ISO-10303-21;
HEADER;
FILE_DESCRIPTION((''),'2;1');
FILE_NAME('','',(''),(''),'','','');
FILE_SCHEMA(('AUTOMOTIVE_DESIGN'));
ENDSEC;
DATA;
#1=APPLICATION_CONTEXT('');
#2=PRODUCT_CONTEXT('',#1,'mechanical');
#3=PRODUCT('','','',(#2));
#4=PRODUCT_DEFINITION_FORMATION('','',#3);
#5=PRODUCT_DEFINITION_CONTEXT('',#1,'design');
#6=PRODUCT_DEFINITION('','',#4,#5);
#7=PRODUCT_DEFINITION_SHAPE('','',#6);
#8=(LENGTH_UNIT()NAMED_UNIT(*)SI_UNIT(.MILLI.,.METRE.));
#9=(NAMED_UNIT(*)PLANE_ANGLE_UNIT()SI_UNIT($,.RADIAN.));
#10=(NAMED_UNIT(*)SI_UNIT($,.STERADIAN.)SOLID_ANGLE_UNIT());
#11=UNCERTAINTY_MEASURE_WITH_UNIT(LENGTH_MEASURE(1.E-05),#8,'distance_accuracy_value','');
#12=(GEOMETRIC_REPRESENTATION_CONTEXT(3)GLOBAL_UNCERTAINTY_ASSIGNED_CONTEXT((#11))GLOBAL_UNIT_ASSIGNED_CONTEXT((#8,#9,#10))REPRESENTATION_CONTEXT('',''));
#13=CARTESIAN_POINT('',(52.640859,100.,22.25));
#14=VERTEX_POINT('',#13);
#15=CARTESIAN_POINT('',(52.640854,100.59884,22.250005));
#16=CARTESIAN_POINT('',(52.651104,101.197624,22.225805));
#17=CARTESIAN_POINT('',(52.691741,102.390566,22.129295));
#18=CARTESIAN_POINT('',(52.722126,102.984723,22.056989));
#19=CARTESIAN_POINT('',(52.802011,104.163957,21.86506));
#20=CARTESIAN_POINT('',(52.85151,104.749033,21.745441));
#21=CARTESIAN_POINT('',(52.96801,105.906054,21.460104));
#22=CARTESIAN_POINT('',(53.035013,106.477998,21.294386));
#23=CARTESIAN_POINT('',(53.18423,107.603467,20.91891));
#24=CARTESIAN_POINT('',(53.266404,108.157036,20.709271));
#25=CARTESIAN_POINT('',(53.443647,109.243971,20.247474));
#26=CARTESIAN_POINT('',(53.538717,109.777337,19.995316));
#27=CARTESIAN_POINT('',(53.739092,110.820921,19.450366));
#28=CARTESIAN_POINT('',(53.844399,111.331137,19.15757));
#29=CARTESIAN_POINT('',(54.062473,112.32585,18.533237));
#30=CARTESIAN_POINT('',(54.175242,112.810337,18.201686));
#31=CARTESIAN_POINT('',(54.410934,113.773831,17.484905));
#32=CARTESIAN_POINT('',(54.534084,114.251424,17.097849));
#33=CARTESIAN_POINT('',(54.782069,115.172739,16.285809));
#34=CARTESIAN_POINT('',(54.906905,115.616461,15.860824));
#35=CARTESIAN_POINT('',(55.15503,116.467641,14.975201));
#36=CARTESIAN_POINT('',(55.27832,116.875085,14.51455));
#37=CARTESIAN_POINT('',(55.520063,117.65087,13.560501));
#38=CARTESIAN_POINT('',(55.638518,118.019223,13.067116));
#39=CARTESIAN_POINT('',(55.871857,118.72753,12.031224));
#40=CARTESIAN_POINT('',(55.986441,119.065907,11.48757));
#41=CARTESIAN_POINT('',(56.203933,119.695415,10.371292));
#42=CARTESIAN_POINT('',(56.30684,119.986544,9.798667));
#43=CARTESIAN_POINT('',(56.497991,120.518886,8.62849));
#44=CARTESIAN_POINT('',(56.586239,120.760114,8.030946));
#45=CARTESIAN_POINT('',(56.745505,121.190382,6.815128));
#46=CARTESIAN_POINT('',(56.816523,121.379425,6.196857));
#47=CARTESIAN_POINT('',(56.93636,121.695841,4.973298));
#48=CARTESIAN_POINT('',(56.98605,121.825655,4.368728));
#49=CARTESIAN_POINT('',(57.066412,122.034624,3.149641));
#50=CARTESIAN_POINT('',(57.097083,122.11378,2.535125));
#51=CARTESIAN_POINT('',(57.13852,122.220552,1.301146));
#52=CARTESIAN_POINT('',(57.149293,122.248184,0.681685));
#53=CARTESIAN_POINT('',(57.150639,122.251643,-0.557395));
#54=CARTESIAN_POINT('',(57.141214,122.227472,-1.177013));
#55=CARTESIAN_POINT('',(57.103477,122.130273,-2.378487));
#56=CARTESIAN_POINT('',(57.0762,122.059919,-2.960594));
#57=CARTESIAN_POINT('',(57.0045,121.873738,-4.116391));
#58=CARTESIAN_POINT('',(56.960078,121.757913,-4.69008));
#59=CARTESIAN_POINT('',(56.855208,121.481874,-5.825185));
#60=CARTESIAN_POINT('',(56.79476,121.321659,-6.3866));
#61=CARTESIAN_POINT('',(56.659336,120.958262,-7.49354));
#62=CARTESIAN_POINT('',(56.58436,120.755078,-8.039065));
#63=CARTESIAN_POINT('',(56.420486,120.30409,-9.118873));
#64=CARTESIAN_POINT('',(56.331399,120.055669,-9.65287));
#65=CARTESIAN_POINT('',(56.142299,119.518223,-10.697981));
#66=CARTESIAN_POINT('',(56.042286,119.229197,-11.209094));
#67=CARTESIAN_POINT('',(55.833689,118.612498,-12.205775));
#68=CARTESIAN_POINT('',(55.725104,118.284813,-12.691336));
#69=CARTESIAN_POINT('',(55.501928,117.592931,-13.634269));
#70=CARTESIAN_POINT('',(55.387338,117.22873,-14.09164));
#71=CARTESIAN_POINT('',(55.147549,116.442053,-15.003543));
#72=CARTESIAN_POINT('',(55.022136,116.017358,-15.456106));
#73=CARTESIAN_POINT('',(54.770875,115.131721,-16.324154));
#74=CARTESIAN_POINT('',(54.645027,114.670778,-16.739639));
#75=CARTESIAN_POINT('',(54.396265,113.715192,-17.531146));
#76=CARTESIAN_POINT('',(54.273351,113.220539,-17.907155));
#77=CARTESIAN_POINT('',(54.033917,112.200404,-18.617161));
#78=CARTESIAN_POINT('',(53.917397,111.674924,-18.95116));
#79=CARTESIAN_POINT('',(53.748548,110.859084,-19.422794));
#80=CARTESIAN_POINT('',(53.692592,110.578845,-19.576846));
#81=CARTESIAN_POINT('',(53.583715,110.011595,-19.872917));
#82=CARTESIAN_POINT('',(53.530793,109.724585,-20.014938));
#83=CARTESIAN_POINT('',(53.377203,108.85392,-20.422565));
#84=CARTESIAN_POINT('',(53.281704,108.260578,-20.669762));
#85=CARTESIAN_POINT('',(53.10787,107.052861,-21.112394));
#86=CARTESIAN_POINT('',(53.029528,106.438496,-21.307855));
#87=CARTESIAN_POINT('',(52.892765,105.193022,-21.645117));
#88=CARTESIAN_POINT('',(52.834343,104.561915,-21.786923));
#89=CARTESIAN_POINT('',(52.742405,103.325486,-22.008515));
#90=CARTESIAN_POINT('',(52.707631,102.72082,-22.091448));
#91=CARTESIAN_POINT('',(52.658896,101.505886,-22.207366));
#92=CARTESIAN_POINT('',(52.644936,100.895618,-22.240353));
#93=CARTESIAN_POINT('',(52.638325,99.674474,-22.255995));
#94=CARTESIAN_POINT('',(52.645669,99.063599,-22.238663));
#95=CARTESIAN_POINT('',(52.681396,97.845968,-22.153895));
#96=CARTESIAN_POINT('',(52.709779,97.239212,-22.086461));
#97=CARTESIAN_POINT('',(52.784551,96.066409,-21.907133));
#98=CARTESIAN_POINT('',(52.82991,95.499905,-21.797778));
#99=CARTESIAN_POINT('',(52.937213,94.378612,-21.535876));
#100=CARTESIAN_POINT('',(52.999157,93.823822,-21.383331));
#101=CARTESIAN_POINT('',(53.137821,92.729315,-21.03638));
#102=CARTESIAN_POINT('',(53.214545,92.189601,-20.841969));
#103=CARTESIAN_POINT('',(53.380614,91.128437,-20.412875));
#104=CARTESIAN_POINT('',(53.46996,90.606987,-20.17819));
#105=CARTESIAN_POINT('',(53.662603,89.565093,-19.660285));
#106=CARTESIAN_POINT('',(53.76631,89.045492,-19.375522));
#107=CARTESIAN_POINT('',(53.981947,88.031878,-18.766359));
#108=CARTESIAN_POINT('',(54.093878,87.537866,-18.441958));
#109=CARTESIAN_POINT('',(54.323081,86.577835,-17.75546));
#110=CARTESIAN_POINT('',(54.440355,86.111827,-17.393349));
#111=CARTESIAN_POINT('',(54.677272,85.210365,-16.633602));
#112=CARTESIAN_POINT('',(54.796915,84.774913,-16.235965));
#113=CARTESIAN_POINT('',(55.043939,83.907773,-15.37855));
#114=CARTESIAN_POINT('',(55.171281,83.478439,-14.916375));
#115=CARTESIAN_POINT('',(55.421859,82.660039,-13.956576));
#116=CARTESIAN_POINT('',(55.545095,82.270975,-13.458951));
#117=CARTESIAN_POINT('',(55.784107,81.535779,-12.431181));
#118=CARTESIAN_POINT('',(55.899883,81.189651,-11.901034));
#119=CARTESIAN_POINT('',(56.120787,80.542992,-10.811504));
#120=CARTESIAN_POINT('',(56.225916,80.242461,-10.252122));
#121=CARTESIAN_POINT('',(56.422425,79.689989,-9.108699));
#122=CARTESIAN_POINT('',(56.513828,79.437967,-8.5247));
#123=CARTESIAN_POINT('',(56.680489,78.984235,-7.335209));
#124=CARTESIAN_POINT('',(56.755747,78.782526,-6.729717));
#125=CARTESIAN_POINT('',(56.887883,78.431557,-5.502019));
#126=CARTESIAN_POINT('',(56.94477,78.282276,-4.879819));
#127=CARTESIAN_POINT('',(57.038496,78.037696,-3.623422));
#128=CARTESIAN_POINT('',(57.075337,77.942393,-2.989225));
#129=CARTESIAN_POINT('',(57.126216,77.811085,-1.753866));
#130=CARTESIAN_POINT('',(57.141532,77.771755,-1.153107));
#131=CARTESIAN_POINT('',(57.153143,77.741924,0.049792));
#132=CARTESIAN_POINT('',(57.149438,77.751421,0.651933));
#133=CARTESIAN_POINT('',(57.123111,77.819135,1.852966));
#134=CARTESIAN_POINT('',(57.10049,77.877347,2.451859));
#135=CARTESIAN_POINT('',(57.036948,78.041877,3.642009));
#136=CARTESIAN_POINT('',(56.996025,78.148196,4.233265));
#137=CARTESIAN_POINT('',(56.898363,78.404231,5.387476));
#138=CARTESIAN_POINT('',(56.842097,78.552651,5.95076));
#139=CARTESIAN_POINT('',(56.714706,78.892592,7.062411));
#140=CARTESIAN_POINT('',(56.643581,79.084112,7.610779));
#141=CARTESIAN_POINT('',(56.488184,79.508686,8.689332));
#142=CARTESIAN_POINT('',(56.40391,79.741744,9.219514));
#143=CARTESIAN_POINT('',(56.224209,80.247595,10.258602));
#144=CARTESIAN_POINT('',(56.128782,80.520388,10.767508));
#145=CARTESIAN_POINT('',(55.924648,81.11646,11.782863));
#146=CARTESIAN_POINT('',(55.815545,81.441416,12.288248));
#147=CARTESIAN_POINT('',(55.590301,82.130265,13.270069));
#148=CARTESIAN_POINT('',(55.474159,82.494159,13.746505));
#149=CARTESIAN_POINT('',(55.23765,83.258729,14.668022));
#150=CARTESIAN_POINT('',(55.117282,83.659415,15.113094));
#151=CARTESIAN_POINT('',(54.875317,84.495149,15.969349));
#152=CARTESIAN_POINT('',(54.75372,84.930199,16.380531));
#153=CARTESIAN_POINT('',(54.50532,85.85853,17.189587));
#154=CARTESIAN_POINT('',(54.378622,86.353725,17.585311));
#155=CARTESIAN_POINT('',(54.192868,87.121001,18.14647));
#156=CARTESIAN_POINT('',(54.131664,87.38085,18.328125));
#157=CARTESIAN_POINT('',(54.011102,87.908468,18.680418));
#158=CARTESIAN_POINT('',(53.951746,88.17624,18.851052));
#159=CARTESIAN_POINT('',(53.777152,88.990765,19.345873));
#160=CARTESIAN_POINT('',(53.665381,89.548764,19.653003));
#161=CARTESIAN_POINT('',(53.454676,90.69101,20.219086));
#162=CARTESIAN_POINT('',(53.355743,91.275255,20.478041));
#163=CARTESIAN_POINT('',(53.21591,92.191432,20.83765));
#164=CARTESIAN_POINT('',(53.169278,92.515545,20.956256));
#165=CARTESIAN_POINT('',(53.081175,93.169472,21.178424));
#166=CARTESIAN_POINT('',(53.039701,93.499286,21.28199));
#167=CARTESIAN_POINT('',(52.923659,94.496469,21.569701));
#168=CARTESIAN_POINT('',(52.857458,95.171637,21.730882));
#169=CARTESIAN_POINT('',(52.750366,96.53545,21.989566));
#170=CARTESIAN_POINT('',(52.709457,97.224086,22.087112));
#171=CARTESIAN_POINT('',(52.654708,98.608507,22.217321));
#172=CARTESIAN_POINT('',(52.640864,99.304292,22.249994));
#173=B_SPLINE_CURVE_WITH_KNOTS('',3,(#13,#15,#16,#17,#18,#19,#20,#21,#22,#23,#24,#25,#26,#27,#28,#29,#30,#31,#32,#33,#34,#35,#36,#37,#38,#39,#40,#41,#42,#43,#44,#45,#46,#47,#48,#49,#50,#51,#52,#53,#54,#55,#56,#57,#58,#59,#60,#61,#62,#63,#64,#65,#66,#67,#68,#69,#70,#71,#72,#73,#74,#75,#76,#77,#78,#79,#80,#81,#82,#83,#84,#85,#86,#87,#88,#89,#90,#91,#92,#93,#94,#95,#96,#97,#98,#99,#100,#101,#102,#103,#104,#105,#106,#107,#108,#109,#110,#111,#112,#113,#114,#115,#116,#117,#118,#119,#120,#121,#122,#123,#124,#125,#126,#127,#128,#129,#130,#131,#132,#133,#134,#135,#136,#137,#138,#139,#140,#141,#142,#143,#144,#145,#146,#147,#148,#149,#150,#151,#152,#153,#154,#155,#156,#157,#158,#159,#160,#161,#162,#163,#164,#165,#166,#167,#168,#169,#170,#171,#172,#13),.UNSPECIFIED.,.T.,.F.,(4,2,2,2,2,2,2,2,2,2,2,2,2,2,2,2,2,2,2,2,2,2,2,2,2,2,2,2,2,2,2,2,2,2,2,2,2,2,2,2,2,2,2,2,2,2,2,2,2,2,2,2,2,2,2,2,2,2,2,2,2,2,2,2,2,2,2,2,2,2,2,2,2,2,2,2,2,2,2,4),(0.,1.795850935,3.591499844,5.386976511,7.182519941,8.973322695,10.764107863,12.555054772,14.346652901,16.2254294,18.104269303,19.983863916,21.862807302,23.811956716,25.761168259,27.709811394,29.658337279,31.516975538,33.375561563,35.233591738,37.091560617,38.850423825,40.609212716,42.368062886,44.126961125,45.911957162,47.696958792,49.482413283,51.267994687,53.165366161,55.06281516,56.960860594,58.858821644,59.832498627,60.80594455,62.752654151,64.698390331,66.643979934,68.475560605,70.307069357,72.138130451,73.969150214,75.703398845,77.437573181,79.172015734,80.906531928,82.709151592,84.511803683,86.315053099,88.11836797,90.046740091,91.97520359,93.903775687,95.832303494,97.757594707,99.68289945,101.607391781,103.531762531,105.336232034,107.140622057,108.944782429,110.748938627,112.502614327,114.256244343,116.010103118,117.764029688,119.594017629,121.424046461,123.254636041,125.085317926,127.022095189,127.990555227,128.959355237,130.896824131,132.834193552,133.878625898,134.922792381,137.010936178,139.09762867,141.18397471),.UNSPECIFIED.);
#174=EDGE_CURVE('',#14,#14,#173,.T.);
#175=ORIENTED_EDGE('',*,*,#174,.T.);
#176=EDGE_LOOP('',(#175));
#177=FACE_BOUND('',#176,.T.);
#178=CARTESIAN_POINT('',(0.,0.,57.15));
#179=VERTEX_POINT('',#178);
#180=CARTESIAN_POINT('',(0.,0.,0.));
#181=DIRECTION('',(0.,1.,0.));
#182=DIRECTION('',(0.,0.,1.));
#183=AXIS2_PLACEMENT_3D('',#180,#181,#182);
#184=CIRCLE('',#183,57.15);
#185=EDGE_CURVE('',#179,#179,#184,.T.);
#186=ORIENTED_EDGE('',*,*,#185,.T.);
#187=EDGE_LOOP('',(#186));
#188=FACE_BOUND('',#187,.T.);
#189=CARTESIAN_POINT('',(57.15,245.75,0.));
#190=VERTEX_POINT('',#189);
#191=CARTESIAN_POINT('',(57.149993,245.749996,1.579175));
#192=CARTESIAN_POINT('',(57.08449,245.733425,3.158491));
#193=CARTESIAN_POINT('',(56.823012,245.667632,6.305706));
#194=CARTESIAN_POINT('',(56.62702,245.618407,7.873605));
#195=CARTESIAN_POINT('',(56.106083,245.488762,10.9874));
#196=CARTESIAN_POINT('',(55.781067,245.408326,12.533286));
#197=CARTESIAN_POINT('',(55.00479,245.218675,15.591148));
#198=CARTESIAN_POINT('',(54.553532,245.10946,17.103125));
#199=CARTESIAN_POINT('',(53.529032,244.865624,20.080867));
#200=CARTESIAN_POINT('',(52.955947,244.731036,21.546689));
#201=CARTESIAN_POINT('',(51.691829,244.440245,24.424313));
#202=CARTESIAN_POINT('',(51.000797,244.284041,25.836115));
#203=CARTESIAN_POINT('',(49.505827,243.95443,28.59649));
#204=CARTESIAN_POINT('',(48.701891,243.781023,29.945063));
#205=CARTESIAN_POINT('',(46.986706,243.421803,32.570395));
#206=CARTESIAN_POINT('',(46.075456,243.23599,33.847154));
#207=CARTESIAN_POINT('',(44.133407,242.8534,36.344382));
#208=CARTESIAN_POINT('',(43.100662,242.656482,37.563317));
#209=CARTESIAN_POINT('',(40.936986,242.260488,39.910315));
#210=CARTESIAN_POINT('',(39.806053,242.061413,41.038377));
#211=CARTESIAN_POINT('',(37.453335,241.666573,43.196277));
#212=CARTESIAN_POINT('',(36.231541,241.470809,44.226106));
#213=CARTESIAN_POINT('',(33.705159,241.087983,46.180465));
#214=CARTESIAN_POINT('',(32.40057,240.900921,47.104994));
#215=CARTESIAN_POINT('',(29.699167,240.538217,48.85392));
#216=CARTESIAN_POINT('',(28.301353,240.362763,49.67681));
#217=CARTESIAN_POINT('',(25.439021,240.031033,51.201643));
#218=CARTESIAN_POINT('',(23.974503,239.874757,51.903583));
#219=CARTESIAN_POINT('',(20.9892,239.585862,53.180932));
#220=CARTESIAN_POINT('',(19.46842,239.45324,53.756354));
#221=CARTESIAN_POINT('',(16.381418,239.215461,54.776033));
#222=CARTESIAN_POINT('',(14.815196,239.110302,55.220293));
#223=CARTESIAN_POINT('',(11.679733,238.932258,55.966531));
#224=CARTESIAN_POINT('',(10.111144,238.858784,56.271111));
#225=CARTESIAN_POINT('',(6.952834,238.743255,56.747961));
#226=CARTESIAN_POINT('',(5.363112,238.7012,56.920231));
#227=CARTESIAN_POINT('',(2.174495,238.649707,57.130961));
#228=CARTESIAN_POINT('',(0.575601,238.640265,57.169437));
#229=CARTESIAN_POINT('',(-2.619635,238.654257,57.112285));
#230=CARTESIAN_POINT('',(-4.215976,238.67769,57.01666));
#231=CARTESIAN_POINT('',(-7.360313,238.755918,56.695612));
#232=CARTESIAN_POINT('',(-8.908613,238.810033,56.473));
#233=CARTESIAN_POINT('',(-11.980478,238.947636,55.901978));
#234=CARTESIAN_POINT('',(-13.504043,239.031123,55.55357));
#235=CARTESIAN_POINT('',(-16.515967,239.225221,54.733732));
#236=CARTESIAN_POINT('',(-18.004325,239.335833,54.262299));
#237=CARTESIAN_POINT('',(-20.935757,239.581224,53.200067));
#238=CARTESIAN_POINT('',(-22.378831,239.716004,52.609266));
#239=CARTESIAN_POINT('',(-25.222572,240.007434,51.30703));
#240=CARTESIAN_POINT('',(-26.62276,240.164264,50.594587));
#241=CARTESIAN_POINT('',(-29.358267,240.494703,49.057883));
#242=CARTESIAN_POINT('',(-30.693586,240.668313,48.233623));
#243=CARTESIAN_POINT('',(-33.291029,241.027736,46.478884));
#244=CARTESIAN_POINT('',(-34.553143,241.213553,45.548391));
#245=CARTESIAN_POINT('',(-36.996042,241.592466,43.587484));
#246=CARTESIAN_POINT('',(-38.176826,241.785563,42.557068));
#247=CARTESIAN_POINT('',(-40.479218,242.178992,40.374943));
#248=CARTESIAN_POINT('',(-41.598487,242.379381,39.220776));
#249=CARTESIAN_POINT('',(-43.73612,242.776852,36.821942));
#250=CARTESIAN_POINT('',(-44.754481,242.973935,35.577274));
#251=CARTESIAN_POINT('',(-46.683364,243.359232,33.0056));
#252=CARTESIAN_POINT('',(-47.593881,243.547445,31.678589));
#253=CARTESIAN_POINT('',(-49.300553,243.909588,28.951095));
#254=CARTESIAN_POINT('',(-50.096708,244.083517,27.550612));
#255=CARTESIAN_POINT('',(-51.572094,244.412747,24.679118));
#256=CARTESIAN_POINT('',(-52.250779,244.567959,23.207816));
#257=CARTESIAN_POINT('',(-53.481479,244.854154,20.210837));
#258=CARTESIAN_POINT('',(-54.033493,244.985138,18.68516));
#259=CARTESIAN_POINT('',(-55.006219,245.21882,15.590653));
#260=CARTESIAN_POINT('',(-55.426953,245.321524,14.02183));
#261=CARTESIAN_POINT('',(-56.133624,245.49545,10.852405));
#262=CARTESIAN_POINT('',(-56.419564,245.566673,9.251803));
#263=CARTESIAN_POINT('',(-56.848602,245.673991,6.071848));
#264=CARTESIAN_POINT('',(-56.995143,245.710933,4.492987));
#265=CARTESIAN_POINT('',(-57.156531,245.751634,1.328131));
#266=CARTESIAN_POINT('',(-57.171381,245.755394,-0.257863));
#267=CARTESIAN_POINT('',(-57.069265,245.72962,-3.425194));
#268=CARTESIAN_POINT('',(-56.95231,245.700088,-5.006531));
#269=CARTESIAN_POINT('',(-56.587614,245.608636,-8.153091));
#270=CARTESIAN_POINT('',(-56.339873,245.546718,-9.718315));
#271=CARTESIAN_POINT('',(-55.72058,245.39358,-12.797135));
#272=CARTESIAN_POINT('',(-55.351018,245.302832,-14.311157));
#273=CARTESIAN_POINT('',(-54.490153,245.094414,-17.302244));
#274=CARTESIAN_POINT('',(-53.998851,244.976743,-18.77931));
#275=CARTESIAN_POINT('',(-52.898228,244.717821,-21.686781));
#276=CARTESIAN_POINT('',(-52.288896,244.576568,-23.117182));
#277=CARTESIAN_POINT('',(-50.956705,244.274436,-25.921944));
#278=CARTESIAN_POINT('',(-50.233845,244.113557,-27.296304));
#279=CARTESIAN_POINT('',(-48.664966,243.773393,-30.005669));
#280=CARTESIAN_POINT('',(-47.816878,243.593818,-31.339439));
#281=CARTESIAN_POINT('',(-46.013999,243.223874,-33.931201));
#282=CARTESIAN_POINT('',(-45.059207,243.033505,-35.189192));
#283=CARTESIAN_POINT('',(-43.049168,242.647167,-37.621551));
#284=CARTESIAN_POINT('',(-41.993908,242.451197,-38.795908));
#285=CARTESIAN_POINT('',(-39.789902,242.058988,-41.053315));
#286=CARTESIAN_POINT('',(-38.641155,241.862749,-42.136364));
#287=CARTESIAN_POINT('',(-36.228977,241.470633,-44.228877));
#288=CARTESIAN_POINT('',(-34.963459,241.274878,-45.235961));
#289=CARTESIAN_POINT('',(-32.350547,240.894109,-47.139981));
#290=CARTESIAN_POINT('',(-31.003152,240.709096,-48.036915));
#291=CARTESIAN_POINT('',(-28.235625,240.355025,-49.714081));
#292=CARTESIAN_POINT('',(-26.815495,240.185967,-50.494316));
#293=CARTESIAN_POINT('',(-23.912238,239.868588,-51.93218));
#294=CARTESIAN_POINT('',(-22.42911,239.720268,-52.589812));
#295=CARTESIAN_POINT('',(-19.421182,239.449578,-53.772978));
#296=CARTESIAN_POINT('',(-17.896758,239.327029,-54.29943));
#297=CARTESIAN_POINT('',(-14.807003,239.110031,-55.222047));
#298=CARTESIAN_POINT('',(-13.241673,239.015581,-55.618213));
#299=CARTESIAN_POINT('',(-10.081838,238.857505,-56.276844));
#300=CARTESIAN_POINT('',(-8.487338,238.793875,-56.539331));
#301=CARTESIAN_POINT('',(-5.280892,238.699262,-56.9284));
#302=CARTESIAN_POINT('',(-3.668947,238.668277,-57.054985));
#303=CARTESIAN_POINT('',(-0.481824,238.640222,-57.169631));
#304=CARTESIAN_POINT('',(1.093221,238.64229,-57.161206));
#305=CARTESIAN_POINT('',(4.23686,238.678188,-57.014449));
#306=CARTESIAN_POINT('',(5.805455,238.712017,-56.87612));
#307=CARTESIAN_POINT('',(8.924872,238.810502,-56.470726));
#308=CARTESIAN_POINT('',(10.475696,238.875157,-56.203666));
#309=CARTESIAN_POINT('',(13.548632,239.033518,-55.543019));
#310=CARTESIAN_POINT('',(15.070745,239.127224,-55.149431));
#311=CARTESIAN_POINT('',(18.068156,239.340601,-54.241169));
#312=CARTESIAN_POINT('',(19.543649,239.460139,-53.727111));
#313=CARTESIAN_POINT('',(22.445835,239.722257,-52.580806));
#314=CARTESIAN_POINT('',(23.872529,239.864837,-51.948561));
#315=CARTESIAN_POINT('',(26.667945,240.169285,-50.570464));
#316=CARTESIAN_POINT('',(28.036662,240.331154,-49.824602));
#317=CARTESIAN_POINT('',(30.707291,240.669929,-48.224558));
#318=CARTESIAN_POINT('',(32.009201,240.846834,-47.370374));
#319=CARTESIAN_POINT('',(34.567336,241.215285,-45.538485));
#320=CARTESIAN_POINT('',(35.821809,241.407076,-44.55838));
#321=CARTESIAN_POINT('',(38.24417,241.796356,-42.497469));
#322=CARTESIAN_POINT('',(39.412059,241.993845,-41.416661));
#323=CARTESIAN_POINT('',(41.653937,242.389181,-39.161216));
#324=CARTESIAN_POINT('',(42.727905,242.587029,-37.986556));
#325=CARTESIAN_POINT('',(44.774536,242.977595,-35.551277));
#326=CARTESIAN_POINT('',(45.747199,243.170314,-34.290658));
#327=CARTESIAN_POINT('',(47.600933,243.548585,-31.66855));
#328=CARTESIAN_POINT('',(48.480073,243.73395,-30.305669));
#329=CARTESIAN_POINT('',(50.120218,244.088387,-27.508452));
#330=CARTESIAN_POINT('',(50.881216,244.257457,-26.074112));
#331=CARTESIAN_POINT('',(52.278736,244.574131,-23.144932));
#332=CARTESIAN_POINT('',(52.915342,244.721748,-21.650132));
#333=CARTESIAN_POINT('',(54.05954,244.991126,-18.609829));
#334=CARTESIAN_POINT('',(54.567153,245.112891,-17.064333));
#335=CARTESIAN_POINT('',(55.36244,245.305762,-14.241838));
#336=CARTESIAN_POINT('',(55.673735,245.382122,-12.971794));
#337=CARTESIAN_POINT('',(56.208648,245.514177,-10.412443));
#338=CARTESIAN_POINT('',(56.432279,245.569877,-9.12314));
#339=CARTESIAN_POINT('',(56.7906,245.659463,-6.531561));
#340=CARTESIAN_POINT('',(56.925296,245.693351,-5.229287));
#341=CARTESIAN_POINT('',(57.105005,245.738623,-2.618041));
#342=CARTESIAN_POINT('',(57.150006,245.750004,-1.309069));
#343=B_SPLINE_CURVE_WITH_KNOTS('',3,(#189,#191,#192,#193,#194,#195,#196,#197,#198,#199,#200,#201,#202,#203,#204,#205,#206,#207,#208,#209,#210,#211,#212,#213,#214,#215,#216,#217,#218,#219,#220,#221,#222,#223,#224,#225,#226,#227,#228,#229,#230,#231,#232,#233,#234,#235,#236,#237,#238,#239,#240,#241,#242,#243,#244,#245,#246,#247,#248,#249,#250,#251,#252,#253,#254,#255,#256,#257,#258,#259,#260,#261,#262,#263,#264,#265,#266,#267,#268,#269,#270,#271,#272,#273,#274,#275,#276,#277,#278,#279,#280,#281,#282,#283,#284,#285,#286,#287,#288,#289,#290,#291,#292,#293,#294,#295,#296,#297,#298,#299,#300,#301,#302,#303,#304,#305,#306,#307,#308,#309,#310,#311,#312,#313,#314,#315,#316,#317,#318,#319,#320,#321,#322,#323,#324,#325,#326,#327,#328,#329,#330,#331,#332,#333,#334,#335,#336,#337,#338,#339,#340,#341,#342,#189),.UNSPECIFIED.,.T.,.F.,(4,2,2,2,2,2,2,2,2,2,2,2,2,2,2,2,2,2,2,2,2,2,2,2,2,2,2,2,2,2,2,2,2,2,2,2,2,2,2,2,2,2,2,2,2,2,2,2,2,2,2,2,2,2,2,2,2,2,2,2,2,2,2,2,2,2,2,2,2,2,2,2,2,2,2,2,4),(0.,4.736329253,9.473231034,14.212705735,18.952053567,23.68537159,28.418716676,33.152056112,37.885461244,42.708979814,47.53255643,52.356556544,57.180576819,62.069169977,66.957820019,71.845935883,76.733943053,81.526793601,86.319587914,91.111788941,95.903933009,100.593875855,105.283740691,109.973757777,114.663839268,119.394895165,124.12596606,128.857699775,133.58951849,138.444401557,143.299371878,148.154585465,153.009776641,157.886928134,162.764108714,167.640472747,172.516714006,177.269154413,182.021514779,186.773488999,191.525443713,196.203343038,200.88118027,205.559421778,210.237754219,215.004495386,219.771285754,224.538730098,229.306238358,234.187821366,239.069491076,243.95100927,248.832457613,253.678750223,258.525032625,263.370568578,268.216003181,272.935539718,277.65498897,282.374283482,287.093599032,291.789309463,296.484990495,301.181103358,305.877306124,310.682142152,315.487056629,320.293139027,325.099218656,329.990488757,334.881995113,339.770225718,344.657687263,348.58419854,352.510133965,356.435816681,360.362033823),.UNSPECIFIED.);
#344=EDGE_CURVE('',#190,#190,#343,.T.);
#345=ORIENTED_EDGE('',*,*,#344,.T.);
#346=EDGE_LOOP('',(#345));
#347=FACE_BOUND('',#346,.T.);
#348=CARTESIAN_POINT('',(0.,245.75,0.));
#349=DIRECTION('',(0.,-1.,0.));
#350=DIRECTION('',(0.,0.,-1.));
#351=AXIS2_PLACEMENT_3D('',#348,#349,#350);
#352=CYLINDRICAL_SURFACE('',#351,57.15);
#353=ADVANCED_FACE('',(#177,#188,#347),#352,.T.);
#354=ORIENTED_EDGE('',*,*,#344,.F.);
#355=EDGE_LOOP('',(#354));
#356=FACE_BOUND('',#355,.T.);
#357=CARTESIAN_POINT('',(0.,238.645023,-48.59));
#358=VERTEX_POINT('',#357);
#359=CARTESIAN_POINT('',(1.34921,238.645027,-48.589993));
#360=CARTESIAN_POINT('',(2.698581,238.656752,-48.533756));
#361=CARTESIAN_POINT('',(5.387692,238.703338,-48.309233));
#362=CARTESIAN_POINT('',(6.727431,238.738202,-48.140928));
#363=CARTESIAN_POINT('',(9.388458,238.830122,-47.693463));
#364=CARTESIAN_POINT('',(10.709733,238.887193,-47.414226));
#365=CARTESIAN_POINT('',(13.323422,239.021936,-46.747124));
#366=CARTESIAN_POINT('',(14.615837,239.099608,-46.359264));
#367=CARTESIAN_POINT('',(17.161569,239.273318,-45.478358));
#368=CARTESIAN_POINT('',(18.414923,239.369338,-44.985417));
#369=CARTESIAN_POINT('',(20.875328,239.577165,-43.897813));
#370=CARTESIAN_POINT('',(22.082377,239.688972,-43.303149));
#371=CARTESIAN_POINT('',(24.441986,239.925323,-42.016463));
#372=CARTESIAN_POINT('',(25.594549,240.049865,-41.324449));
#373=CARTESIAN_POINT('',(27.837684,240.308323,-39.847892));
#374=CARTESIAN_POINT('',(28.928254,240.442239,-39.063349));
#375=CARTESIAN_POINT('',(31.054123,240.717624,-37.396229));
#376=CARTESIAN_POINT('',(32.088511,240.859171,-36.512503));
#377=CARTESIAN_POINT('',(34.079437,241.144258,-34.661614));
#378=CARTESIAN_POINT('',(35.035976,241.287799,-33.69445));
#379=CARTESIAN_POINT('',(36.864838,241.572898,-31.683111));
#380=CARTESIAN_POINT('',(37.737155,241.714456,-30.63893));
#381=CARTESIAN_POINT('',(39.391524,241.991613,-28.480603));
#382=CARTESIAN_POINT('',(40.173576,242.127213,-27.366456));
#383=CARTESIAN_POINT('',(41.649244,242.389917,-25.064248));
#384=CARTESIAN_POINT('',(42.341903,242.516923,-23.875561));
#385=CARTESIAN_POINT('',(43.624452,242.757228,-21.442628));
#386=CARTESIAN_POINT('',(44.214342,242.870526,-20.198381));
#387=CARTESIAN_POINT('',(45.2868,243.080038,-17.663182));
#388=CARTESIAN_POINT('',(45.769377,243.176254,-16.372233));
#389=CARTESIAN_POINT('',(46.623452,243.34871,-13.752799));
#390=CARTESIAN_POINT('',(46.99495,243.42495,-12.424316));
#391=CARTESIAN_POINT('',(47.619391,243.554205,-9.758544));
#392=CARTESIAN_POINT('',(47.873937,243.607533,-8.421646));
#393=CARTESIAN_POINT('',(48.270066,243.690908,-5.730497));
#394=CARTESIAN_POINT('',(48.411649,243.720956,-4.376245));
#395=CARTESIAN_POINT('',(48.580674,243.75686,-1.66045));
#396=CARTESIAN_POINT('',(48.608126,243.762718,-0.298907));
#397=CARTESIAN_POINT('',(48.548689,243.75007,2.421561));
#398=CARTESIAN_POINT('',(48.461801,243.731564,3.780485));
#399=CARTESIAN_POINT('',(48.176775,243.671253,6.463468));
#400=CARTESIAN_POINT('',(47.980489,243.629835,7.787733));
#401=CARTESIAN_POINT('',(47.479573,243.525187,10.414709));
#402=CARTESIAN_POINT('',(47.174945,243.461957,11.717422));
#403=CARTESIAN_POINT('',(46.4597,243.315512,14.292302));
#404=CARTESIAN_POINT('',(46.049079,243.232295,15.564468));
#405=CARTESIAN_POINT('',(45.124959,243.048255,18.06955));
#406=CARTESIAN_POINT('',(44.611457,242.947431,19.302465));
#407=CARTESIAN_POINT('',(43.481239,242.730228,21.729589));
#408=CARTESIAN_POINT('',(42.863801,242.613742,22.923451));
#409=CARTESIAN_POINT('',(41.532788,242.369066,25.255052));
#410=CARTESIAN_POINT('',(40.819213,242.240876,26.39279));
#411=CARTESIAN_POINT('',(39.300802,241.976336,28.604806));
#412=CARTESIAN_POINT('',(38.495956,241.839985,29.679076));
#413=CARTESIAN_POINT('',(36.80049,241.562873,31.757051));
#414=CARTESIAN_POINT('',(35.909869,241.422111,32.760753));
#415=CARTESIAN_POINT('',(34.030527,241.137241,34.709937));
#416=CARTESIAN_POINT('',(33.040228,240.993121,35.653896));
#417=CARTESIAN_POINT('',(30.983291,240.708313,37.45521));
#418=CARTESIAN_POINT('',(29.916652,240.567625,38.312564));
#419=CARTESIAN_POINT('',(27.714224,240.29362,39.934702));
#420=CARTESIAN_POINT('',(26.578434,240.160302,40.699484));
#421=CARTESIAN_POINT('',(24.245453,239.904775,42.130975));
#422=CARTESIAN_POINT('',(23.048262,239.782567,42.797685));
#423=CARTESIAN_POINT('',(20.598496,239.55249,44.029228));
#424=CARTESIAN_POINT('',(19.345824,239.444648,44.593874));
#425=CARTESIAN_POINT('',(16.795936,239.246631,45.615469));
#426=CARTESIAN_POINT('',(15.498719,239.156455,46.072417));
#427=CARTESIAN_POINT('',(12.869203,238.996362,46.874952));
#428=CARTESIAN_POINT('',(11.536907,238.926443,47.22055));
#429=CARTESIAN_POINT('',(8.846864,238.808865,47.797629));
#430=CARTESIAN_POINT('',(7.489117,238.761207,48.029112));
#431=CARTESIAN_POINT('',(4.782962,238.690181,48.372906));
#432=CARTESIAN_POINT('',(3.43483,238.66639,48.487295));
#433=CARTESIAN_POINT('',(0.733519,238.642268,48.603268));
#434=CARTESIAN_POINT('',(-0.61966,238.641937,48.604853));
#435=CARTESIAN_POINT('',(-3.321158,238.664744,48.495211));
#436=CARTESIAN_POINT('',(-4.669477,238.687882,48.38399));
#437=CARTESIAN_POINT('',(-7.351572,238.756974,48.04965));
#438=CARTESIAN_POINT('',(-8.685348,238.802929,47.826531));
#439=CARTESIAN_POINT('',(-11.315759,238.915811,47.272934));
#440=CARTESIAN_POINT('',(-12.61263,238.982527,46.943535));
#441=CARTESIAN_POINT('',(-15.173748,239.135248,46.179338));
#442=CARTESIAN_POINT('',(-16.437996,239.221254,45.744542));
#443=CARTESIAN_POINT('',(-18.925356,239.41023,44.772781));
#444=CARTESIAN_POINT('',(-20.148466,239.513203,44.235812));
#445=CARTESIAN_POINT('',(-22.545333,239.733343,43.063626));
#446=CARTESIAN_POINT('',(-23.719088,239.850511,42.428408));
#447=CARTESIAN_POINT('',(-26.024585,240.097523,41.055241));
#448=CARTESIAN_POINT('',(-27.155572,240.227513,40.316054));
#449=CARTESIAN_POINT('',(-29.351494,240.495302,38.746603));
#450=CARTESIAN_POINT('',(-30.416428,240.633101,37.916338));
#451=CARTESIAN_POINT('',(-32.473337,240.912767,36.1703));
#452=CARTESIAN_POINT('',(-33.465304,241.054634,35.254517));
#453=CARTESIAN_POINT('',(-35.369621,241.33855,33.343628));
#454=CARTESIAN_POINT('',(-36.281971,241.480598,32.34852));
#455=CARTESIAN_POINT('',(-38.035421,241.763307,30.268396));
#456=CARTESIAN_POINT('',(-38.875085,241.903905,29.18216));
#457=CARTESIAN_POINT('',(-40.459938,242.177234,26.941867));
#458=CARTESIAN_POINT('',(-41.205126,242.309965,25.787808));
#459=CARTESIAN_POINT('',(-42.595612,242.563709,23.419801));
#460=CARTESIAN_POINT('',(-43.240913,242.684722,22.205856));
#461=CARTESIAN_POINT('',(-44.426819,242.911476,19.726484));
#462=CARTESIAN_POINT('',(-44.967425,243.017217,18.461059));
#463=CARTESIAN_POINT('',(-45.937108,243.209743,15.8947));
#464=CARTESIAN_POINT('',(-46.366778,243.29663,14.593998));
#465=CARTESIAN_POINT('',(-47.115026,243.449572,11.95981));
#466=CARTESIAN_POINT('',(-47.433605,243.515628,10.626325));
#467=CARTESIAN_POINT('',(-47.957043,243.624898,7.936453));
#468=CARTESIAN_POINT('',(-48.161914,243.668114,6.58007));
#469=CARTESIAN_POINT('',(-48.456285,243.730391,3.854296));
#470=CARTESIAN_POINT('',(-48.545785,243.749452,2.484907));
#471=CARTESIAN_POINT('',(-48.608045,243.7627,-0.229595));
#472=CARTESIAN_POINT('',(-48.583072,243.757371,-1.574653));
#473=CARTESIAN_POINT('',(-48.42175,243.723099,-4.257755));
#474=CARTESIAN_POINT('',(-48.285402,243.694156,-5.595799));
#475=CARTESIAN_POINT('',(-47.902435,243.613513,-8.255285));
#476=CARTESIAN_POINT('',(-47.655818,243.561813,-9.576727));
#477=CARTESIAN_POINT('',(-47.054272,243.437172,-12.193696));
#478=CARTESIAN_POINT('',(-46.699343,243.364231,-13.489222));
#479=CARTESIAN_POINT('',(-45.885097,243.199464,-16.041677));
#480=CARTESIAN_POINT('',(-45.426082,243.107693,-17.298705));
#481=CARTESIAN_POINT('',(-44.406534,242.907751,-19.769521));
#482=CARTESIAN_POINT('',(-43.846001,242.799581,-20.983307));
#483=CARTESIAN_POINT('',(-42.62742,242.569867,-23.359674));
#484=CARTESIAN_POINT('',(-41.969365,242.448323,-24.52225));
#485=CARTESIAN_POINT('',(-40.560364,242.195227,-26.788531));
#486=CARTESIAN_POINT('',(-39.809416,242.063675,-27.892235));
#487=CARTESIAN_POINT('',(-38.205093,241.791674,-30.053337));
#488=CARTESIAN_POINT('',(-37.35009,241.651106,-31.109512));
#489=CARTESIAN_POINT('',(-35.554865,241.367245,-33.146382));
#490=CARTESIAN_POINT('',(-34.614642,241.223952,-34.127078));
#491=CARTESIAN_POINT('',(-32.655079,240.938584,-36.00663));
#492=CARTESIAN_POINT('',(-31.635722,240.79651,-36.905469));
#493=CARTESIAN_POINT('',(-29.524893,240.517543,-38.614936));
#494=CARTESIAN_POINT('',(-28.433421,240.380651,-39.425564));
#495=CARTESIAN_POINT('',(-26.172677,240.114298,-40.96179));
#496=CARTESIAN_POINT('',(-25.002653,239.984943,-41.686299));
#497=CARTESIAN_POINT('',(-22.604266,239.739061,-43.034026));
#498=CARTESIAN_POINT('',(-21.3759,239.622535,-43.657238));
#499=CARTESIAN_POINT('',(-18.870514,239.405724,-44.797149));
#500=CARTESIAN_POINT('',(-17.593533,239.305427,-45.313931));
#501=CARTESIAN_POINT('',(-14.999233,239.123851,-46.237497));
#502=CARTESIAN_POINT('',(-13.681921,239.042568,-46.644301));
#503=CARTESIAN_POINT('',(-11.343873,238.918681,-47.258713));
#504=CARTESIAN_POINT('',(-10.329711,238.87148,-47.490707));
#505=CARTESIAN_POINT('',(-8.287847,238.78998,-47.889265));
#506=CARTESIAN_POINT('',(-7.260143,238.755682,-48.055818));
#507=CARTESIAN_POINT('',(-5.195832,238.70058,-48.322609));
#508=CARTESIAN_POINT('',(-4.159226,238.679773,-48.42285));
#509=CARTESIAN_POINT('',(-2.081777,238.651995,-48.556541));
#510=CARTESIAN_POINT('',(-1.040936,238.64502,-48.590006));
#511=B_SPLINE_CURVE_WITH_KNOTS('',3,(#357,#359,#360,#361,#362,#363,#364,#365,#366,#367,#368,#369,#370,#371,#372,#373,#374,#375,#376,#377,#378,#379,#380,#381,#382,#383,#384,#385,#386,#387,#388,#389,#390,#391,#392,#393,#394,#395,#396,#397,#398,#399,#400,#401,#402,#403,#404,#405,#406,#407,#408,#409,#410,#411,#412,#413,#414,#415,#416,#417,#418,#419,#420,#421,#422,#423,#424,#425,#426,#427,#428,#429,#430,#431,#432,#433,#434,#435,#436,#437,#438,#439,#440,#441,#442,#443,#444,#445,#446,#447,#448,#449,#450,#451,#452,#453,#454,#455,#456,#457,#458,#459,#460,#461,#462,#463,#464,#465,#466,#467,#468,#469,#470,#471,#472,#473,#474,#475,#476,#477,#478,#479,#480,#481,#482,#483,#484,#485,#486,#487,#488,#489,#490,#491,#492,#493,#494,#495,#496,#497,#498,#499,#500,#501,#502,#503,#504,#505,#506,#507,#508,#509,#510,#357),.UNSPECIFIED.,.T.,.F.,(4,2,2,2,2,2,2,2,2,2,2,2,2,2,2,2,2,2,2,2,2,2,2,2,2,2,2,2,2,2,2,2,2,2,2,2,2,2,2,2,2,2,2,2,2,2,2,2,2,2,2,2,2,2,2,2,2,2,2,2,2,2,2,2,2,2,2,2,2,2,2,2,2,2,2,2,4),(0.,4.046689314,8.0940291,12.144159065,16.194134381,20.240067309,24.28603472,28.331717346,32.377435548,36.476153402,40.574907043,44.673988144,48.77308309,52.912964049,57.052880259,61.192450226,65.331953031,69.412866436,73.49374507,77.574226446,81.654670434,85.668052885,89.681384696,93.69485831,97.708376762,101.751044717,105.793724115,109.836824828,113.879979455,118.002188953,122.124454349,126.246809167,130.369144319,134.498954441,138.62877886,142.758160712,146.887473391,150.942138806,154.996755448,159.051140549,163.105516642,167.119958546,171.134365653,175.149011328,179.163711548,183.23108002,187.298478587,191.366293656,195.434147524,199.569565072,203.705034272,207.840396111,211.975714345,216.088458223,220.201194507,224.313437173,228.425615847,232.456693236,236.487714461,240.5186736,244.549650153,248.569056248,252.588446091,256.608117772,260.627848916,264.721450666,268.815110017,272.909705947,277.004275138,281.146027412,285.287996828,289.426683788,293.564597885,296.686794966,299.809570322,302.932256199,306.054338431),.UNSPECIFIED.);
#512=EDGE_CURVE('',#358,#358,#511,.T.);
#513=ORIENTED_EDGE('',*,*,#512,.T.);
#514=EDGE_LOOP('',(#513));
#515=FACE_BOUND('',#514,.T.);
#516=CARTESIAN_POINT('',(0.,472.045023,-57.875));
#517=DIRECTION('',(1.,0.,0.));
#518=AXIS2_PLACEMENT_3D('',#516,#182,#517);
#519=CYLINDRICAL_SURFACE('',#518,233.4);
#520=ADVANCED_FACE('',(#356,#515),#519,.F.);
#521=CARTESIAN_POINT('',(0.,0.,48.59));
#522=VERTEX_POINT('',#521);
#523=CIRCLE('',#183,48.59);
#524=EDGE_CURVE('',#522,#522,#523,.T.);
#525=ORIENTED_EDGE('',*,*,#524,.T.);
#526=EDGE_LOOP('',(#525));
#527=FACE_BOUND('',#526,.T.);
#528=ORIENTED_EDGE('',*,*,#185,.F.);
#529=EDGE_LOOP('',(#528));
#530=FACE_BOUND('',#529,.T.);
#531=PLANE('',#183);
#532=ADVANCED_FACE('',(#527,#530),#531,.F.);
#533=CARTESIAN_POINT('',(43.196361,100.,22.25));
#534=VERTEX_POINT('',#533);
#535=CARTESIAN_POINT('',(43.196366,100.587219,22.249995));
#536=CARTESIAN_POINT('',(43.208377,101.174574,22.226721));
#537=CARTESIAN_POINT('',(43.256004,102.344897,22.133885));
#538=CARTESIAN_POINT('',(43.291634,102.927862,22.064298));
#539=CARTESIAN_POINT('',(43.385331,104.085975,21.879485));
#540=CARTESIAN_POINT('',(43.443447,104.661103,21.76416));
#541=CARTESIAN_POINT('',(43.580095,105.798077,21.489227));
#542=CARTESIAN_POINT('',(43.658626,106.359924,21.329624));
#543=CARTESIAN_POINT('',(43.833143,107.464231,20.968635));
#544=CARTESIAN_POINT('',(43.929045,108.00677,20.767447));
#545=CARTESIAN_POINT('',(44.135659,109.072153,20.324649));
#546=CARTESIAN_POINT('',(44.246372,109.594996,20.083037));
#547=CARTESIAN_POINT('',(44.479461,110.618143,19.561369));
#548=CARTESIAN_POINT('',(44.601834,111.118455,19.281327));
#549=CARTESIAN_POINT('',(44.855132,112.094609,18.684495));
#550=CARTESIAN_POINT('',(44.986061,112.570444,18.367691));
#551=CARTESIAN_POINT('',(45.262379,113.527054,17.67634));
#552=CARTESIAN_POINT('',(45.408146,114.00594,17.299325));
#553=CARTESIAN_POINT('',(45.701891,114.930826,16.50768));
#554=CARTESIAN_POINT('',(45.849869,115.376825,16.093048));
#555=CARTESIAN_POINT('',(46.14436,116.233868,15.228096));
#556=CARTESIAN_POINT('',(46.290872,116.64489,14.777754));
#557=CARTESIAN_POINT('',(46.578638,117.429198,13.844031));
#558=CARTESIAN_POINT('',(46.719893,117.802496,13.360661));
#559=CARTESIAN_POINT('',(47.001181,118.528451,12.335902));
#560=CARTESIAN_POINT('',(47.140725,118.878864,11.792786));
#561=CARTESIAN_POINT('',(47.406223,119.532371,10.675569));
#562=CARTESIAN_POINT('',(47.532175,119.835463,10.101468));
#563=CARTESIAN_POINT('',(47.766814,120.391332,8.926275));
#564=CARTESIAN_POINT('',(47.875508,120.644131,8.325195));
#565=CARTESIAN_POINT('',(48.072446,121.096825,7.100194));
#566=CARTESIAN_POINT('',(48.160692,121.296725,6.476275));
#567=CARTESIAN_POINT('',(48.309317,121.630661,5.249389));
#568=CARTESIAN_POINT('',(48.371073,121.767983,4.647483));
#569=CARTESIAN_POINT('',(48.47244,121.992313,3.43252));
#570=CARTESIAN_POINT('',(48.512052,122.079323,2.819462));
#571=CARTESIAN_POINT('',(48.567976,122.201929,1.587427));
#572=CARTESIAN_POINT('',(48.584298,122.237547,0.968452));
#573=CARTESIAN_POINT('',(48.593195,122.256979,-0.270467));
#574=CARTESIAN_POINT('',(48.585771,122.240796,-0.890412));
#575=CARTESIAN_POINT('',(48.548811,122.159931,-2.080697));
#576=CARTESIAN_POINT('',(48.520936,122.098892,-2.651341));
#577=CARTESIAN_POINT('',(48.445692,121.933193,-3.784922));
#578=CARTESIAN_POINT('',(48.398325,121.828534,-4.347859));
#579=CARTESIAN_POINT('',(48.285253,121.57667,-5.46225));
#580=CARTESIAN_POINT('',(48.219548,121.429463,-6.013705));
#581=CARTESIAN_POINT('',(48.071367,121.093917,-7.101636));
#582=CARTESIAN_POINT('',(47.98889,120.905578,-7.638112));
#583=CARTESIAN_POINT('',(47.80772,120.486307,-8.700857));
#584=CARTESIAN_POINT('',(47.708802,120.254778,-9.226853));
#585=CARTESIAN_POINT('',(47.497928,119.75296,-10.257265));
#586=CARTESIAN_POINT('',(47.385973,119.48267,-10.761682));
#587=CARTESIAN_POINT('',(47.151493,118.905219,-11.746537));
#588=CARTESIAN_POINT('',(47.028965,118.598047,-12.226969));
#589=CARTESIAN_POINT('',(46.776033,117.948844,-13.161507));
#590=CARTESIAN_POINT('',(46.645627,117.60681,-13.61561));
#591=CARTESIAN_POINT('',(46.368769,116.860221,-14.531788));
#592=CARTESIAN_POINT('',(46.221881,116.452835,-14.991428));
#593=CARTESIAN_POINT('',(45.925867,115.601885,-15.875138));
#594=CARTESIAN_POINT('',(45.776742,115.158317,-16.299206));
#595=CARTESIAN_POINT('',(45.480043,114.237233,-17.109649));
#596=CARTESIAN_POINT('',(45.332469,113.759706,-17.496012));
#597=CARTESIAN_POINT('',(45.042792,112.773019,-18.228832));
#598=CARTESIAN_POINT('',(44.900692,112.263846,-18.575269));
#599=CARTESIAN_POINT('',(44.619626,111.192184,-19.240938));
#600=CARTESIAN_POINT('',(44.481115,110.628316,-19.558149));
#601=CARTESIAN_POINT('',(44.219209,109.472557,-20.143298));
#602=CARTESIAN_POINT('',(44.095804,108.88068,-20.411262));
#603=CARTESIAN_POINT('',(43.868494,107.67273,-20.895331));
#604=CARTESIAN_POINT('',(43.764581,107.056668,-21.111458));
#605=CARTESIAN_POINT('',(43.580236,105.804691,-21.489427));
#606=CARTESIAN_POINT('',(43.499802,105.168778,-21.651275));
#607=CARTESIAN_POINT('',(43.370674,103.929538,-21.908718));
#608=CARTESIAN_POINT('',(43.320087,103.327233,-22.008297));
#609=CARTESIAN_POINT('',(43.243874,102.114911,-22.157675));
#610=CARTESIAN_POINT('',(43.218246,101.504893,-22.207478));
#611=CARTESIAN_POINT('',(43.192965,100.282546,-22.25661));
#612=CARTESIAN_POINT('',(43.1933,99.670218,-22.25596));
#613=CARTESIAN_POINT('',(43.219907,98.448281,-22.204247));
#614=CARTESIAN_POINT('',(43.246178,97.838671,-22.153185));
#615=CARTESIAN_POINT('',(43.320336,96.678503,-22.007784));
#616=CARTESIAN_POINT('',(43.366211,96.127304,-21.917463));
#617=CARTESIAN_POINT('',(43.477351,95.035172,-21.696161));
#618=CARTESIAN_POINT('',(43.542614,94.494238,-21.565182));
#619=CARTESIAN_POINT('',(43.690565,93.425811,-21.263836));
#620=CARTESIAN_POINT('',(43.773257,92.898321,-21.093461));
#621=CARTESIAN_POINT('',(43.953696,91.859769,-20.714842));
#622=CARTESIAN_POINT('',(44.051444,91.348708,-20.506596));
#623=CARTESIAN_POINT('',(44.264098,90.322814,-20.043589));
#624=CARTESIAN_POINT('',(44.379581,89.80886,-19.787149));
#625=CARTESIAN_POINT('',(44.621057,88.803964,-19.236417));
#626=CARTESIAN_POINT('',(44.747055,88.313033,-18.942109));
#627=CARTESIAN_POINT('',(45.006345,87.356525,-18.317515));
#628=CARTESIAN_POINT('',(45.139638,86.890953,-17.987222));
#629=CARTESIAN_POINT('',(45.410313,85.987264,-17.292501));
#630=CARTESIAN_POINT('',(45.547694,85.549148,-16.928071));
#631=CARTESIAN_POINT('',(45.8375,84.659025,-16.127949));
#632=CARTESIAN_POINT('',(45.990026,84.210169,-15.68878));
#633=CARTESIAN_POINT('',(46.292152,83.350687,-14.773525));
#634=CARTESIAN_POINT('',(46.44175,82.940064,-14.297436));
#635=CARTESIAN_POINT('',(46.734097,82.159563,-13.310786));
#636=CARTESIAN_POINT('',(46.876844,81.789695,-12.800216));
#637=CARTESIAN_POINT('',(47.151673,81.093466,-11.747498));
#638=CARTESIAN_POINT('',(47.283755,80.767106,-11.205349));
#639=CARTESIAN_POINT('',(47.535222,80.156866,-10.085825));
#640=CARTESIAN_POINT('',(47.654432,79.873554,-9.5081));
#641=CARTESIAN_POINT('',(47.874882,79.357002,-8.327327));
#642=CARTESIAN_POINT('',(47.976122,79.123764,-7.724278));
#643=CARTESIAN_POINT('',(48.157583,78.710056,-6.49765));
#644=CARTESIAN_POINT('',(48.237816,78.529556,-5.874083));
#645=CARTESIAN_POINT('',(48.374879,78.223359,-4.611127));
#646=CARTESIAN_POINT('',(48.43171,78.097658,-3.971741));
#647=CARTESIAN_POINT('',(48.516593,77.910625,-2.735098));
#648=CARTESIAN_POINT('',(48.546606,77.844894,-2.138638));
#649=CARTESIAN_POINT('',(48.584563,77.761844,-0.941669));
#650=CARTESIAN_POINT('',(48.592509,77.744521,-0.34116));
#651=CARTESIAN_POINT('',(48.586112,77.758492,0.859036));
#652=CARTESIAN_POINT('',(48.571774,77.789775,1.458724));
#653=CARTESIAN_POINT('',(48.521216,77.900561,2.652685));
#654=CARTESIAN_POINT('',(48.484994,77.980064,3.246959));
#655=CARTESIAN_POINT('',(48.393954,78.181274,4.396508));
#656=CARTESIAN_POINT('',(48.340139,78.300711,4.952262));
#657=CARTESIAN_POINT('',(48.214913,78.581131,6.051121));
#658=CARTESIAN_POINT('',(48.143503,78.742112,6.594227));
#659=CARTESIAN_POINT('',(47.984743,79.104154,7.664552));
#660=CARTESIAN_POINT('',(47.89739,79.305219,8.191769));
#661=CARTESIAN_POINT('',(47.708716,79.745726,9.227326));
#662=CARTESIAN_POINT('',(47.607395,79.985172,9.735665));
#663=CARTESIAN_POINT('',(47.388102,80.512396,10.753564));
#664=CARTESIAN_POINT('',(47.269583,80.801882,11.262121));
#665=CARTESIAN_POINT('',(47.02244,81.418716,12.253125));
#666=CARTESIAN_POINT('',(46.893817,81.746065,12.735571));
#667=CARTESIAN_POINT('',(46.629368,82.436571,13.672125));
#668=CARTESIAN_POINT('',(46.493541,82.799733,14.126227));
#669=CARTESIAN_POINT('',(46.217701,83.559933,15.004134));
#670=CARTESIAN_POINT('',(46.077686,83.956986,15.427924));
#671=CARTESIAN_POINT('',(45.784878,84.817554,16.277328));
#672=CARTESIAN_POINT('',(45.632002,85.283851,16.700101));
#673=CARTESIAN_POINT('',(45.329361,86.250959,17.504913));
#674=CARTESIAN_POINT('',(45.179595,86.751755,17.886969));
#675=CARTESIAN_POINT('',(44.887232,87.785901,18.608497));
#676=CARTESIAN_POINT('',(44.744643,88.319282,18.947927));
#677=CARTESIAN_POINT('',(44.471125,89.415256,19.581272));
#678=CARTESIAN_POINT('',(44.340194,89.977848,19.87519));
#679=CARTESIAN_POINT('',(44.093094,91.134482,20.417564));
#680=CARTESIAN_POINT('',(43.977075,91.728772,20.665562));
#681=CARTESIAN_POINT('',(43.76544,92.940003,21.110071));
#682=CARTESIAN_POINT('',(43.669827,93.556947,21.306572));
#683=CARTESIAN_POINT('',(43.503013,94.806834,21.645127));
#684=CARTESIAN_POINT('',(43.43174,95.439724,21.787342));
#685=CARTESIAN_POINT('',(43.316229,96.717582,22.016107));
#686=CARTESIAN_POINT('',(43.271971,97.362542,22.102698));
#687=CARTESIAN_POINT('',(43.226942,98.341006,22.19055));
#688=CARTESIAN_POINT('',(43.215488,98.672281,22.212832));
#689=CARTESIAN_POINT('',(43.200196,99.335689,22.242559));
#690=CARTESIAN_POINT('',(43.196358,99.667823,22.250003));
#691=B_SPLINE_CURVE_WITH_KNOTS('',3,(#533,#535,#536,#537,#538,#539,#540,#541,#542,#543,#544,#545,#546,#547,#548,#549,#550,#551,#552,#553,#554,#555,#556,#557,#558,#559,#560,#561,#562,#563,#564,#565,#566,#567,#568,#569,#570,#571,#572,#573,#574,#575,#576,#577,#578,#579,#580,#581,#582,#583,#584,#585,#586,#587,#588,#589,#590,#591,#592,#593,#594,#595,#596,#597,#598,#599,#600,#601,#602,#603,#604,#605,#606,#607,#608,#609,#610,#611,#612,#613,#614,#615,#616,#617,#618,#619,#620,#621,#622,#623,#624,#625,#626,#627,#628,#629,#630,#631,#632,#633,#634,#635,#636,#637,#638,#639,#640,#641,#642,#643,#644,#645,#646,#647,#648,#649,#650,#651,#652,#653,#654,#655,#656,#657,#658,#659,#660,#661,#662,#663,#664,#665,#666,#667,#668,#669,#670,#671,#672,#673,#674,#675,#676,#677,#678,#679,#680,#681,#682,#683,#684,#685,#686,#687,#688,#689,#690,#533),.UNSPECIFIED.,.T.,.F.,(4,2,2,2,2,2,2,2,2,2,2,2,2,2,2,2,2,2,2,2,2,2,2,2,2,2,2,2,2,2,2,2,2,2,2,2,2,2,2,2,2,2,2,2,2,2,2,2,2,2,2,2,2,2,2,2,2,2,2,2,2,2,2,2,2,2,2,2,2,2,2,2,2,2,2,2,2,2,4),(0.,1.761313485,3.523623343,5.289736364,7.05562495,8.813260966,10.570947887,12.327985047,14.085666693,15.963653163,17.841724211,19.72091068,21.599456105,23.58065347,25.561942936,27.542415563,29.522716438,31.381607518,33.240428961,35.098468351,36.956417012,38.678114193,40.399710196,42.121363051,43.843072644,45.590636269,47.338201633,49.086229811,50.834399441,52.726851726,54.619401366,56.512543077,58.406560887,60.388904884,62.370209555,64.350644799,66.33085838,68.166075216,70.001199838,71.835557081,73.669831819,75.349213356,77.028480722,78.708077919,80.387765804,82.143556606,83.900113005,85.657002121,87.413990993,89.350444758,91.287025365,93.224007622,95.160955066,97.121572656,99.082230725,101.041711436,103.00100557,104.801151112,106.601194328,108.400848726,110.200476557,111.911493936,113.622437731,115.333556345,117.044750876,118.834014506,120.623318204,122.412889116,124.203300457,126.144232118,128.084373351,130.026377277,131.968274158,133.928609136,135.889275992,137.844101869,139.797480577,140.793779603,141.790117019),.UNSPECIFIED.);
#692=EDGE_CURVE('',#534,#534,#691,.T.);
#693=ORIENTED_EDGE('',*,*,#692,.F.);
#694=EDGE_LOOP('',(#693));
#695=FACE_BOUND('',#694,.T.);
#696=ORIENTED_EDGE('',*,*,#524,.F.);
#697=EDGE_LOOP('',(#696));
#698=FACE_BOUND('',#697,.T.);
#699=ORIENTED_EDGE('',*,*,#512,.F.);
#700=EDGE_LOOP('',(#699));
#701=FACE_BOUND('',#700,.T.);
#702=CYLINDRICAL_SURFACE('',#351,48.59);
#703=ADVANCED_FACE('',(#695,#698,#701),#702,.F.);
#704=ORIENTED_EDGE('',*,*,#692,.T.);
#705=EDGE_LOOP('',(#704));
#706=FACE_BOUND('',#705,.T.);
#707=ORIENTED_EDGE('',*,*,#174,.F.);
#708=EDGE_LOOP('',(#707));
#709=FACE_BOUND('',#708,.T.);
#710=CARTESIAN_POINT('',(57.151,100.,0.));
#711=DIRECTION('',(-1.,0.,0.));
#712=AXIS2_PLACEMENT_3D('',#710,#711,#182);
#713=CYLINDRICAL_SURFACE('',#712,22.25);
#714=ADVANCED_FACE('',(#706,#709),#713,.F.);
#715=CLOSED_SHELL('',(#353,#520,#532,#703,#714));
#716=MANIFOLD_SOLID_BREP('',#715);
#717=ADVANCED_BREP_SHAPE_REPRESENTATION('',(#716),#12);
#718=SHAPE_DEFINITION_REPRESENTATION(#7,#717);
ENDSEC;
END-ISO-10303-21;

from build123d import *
from OCP.BRepAlgoAPI import BRepAlgoAPI_Cut
from OCP.TopTools import TopTools_ListOfShape

# Parameters (mm, degrees)
SKETCH1_R               = 57.15
SKETCH1_R_2             = 48.59
BOSS_EXTRUDE1_DEPTH     = 245.75
CUT_EXTRUDE1_DEPTH      = 57.875
CUT_EXTRUDE2_REACH      = 260.699
CUT_EXTRUDE2_END_RADIUS = 57.15
SKETCH3_R               = 22.25


with BuildPart() as part:
    # Sketch1 → Boss-Extrude1 (new body)
    with BuildSketch(Plane(origin=(0, 0, 0), x_dir=(1, 0, 0), z_dir=(0, 1, 0))):
        with Locations(Location((0, 0, 0), (0, 0, 270))):
            Circle(SKETCH1_R)
        with Locations(Location((0, 0, 0), (0, 0, 270))):
            Circle(SKETCH1_R_2, mode=Mode.SUBTRACT)
    extrude(amount=BOSS_EXTRUDE1_DEPTH)


with BuildPart() as cut_extrude1_tool:
    # Sketch2 → Cut-Extrude1 (new, symmetric)
    with BuildSketch(Plane.XY):
        with BuildLine():
            Line((57.15, 245.75), (-57.15, 245.75))
            ThreePointArc((-57.15, 245.75), (0, 238.645023145), (57.15, 245.75))
        make_face()
    extrude(amount=CUT_EXTRUDE1_DEPTH, both=True)


with BuildPart() as part_1:
    add(part.part)

    # Cut-Extrude1: cut by cut_extrude1_tool, with a tolerance
    cut_extrude1_stock = TopTools_ListOfShape()
    cut_extrude1_stock.Append(part_1.part.wrapped)
    cut_extrude1_tools = TopTools_ListOfShape()
    cut_extrude1_tools.Append(cut_extrude1_tool.part.wrapped)
    cut_extrude1_cut = BRepAlgoAPI_Cut()
    cut_extrude1_cut.SetArguments(cut_extrude1_stock)
    cut_extrude1_cut.SetTools(cut_extrude1_tools)
    cut_extrude1_cut.SetFuzzyValue(0.00001)
    cut_extrude1_cut.Build()
    add(Compound.cast(cut_extrude1_cut.Shape()).solids(), mode=Mode.REPLACE)

    # Cut-Extrude2: up to this cylinder (the profile starts inside it)
    cut_extrude2_end = Plane(origin=(0, 100, 0), z_dir=(0, -1, 0)) * Cylinder(CUT_EXTRUDE2_END_RADIUS, 636.698, mode=Mode.PRIVATE)
    # Sketch3 → Cut-Extrude2 (cut, up to the surface)
    with BuildSketch(Plane(origin=(0, 0, 0), x_dir=(0, 0, -1), z_dir=(1, 0, 0)), mode=Mode.PRIVATE) as cut_extrude2_sk1:
        with Locations(Location((0, 100, 0), (0, 0, 180))):
            Circle(SKETCH3_R)
    cut_extrude2_tool1 = extrude(cut_extrude2_sk1.sketch, amount=CUT_EXTRUDE2_REACH, mode=Mode.PRIVATE) & cut_extrude2_end
    add(cut_extrude2_tool1.solids().sort_by_distance((0, 100, 0))[0], mode=Mode.SUBTRACT)


solid = part_1.part
